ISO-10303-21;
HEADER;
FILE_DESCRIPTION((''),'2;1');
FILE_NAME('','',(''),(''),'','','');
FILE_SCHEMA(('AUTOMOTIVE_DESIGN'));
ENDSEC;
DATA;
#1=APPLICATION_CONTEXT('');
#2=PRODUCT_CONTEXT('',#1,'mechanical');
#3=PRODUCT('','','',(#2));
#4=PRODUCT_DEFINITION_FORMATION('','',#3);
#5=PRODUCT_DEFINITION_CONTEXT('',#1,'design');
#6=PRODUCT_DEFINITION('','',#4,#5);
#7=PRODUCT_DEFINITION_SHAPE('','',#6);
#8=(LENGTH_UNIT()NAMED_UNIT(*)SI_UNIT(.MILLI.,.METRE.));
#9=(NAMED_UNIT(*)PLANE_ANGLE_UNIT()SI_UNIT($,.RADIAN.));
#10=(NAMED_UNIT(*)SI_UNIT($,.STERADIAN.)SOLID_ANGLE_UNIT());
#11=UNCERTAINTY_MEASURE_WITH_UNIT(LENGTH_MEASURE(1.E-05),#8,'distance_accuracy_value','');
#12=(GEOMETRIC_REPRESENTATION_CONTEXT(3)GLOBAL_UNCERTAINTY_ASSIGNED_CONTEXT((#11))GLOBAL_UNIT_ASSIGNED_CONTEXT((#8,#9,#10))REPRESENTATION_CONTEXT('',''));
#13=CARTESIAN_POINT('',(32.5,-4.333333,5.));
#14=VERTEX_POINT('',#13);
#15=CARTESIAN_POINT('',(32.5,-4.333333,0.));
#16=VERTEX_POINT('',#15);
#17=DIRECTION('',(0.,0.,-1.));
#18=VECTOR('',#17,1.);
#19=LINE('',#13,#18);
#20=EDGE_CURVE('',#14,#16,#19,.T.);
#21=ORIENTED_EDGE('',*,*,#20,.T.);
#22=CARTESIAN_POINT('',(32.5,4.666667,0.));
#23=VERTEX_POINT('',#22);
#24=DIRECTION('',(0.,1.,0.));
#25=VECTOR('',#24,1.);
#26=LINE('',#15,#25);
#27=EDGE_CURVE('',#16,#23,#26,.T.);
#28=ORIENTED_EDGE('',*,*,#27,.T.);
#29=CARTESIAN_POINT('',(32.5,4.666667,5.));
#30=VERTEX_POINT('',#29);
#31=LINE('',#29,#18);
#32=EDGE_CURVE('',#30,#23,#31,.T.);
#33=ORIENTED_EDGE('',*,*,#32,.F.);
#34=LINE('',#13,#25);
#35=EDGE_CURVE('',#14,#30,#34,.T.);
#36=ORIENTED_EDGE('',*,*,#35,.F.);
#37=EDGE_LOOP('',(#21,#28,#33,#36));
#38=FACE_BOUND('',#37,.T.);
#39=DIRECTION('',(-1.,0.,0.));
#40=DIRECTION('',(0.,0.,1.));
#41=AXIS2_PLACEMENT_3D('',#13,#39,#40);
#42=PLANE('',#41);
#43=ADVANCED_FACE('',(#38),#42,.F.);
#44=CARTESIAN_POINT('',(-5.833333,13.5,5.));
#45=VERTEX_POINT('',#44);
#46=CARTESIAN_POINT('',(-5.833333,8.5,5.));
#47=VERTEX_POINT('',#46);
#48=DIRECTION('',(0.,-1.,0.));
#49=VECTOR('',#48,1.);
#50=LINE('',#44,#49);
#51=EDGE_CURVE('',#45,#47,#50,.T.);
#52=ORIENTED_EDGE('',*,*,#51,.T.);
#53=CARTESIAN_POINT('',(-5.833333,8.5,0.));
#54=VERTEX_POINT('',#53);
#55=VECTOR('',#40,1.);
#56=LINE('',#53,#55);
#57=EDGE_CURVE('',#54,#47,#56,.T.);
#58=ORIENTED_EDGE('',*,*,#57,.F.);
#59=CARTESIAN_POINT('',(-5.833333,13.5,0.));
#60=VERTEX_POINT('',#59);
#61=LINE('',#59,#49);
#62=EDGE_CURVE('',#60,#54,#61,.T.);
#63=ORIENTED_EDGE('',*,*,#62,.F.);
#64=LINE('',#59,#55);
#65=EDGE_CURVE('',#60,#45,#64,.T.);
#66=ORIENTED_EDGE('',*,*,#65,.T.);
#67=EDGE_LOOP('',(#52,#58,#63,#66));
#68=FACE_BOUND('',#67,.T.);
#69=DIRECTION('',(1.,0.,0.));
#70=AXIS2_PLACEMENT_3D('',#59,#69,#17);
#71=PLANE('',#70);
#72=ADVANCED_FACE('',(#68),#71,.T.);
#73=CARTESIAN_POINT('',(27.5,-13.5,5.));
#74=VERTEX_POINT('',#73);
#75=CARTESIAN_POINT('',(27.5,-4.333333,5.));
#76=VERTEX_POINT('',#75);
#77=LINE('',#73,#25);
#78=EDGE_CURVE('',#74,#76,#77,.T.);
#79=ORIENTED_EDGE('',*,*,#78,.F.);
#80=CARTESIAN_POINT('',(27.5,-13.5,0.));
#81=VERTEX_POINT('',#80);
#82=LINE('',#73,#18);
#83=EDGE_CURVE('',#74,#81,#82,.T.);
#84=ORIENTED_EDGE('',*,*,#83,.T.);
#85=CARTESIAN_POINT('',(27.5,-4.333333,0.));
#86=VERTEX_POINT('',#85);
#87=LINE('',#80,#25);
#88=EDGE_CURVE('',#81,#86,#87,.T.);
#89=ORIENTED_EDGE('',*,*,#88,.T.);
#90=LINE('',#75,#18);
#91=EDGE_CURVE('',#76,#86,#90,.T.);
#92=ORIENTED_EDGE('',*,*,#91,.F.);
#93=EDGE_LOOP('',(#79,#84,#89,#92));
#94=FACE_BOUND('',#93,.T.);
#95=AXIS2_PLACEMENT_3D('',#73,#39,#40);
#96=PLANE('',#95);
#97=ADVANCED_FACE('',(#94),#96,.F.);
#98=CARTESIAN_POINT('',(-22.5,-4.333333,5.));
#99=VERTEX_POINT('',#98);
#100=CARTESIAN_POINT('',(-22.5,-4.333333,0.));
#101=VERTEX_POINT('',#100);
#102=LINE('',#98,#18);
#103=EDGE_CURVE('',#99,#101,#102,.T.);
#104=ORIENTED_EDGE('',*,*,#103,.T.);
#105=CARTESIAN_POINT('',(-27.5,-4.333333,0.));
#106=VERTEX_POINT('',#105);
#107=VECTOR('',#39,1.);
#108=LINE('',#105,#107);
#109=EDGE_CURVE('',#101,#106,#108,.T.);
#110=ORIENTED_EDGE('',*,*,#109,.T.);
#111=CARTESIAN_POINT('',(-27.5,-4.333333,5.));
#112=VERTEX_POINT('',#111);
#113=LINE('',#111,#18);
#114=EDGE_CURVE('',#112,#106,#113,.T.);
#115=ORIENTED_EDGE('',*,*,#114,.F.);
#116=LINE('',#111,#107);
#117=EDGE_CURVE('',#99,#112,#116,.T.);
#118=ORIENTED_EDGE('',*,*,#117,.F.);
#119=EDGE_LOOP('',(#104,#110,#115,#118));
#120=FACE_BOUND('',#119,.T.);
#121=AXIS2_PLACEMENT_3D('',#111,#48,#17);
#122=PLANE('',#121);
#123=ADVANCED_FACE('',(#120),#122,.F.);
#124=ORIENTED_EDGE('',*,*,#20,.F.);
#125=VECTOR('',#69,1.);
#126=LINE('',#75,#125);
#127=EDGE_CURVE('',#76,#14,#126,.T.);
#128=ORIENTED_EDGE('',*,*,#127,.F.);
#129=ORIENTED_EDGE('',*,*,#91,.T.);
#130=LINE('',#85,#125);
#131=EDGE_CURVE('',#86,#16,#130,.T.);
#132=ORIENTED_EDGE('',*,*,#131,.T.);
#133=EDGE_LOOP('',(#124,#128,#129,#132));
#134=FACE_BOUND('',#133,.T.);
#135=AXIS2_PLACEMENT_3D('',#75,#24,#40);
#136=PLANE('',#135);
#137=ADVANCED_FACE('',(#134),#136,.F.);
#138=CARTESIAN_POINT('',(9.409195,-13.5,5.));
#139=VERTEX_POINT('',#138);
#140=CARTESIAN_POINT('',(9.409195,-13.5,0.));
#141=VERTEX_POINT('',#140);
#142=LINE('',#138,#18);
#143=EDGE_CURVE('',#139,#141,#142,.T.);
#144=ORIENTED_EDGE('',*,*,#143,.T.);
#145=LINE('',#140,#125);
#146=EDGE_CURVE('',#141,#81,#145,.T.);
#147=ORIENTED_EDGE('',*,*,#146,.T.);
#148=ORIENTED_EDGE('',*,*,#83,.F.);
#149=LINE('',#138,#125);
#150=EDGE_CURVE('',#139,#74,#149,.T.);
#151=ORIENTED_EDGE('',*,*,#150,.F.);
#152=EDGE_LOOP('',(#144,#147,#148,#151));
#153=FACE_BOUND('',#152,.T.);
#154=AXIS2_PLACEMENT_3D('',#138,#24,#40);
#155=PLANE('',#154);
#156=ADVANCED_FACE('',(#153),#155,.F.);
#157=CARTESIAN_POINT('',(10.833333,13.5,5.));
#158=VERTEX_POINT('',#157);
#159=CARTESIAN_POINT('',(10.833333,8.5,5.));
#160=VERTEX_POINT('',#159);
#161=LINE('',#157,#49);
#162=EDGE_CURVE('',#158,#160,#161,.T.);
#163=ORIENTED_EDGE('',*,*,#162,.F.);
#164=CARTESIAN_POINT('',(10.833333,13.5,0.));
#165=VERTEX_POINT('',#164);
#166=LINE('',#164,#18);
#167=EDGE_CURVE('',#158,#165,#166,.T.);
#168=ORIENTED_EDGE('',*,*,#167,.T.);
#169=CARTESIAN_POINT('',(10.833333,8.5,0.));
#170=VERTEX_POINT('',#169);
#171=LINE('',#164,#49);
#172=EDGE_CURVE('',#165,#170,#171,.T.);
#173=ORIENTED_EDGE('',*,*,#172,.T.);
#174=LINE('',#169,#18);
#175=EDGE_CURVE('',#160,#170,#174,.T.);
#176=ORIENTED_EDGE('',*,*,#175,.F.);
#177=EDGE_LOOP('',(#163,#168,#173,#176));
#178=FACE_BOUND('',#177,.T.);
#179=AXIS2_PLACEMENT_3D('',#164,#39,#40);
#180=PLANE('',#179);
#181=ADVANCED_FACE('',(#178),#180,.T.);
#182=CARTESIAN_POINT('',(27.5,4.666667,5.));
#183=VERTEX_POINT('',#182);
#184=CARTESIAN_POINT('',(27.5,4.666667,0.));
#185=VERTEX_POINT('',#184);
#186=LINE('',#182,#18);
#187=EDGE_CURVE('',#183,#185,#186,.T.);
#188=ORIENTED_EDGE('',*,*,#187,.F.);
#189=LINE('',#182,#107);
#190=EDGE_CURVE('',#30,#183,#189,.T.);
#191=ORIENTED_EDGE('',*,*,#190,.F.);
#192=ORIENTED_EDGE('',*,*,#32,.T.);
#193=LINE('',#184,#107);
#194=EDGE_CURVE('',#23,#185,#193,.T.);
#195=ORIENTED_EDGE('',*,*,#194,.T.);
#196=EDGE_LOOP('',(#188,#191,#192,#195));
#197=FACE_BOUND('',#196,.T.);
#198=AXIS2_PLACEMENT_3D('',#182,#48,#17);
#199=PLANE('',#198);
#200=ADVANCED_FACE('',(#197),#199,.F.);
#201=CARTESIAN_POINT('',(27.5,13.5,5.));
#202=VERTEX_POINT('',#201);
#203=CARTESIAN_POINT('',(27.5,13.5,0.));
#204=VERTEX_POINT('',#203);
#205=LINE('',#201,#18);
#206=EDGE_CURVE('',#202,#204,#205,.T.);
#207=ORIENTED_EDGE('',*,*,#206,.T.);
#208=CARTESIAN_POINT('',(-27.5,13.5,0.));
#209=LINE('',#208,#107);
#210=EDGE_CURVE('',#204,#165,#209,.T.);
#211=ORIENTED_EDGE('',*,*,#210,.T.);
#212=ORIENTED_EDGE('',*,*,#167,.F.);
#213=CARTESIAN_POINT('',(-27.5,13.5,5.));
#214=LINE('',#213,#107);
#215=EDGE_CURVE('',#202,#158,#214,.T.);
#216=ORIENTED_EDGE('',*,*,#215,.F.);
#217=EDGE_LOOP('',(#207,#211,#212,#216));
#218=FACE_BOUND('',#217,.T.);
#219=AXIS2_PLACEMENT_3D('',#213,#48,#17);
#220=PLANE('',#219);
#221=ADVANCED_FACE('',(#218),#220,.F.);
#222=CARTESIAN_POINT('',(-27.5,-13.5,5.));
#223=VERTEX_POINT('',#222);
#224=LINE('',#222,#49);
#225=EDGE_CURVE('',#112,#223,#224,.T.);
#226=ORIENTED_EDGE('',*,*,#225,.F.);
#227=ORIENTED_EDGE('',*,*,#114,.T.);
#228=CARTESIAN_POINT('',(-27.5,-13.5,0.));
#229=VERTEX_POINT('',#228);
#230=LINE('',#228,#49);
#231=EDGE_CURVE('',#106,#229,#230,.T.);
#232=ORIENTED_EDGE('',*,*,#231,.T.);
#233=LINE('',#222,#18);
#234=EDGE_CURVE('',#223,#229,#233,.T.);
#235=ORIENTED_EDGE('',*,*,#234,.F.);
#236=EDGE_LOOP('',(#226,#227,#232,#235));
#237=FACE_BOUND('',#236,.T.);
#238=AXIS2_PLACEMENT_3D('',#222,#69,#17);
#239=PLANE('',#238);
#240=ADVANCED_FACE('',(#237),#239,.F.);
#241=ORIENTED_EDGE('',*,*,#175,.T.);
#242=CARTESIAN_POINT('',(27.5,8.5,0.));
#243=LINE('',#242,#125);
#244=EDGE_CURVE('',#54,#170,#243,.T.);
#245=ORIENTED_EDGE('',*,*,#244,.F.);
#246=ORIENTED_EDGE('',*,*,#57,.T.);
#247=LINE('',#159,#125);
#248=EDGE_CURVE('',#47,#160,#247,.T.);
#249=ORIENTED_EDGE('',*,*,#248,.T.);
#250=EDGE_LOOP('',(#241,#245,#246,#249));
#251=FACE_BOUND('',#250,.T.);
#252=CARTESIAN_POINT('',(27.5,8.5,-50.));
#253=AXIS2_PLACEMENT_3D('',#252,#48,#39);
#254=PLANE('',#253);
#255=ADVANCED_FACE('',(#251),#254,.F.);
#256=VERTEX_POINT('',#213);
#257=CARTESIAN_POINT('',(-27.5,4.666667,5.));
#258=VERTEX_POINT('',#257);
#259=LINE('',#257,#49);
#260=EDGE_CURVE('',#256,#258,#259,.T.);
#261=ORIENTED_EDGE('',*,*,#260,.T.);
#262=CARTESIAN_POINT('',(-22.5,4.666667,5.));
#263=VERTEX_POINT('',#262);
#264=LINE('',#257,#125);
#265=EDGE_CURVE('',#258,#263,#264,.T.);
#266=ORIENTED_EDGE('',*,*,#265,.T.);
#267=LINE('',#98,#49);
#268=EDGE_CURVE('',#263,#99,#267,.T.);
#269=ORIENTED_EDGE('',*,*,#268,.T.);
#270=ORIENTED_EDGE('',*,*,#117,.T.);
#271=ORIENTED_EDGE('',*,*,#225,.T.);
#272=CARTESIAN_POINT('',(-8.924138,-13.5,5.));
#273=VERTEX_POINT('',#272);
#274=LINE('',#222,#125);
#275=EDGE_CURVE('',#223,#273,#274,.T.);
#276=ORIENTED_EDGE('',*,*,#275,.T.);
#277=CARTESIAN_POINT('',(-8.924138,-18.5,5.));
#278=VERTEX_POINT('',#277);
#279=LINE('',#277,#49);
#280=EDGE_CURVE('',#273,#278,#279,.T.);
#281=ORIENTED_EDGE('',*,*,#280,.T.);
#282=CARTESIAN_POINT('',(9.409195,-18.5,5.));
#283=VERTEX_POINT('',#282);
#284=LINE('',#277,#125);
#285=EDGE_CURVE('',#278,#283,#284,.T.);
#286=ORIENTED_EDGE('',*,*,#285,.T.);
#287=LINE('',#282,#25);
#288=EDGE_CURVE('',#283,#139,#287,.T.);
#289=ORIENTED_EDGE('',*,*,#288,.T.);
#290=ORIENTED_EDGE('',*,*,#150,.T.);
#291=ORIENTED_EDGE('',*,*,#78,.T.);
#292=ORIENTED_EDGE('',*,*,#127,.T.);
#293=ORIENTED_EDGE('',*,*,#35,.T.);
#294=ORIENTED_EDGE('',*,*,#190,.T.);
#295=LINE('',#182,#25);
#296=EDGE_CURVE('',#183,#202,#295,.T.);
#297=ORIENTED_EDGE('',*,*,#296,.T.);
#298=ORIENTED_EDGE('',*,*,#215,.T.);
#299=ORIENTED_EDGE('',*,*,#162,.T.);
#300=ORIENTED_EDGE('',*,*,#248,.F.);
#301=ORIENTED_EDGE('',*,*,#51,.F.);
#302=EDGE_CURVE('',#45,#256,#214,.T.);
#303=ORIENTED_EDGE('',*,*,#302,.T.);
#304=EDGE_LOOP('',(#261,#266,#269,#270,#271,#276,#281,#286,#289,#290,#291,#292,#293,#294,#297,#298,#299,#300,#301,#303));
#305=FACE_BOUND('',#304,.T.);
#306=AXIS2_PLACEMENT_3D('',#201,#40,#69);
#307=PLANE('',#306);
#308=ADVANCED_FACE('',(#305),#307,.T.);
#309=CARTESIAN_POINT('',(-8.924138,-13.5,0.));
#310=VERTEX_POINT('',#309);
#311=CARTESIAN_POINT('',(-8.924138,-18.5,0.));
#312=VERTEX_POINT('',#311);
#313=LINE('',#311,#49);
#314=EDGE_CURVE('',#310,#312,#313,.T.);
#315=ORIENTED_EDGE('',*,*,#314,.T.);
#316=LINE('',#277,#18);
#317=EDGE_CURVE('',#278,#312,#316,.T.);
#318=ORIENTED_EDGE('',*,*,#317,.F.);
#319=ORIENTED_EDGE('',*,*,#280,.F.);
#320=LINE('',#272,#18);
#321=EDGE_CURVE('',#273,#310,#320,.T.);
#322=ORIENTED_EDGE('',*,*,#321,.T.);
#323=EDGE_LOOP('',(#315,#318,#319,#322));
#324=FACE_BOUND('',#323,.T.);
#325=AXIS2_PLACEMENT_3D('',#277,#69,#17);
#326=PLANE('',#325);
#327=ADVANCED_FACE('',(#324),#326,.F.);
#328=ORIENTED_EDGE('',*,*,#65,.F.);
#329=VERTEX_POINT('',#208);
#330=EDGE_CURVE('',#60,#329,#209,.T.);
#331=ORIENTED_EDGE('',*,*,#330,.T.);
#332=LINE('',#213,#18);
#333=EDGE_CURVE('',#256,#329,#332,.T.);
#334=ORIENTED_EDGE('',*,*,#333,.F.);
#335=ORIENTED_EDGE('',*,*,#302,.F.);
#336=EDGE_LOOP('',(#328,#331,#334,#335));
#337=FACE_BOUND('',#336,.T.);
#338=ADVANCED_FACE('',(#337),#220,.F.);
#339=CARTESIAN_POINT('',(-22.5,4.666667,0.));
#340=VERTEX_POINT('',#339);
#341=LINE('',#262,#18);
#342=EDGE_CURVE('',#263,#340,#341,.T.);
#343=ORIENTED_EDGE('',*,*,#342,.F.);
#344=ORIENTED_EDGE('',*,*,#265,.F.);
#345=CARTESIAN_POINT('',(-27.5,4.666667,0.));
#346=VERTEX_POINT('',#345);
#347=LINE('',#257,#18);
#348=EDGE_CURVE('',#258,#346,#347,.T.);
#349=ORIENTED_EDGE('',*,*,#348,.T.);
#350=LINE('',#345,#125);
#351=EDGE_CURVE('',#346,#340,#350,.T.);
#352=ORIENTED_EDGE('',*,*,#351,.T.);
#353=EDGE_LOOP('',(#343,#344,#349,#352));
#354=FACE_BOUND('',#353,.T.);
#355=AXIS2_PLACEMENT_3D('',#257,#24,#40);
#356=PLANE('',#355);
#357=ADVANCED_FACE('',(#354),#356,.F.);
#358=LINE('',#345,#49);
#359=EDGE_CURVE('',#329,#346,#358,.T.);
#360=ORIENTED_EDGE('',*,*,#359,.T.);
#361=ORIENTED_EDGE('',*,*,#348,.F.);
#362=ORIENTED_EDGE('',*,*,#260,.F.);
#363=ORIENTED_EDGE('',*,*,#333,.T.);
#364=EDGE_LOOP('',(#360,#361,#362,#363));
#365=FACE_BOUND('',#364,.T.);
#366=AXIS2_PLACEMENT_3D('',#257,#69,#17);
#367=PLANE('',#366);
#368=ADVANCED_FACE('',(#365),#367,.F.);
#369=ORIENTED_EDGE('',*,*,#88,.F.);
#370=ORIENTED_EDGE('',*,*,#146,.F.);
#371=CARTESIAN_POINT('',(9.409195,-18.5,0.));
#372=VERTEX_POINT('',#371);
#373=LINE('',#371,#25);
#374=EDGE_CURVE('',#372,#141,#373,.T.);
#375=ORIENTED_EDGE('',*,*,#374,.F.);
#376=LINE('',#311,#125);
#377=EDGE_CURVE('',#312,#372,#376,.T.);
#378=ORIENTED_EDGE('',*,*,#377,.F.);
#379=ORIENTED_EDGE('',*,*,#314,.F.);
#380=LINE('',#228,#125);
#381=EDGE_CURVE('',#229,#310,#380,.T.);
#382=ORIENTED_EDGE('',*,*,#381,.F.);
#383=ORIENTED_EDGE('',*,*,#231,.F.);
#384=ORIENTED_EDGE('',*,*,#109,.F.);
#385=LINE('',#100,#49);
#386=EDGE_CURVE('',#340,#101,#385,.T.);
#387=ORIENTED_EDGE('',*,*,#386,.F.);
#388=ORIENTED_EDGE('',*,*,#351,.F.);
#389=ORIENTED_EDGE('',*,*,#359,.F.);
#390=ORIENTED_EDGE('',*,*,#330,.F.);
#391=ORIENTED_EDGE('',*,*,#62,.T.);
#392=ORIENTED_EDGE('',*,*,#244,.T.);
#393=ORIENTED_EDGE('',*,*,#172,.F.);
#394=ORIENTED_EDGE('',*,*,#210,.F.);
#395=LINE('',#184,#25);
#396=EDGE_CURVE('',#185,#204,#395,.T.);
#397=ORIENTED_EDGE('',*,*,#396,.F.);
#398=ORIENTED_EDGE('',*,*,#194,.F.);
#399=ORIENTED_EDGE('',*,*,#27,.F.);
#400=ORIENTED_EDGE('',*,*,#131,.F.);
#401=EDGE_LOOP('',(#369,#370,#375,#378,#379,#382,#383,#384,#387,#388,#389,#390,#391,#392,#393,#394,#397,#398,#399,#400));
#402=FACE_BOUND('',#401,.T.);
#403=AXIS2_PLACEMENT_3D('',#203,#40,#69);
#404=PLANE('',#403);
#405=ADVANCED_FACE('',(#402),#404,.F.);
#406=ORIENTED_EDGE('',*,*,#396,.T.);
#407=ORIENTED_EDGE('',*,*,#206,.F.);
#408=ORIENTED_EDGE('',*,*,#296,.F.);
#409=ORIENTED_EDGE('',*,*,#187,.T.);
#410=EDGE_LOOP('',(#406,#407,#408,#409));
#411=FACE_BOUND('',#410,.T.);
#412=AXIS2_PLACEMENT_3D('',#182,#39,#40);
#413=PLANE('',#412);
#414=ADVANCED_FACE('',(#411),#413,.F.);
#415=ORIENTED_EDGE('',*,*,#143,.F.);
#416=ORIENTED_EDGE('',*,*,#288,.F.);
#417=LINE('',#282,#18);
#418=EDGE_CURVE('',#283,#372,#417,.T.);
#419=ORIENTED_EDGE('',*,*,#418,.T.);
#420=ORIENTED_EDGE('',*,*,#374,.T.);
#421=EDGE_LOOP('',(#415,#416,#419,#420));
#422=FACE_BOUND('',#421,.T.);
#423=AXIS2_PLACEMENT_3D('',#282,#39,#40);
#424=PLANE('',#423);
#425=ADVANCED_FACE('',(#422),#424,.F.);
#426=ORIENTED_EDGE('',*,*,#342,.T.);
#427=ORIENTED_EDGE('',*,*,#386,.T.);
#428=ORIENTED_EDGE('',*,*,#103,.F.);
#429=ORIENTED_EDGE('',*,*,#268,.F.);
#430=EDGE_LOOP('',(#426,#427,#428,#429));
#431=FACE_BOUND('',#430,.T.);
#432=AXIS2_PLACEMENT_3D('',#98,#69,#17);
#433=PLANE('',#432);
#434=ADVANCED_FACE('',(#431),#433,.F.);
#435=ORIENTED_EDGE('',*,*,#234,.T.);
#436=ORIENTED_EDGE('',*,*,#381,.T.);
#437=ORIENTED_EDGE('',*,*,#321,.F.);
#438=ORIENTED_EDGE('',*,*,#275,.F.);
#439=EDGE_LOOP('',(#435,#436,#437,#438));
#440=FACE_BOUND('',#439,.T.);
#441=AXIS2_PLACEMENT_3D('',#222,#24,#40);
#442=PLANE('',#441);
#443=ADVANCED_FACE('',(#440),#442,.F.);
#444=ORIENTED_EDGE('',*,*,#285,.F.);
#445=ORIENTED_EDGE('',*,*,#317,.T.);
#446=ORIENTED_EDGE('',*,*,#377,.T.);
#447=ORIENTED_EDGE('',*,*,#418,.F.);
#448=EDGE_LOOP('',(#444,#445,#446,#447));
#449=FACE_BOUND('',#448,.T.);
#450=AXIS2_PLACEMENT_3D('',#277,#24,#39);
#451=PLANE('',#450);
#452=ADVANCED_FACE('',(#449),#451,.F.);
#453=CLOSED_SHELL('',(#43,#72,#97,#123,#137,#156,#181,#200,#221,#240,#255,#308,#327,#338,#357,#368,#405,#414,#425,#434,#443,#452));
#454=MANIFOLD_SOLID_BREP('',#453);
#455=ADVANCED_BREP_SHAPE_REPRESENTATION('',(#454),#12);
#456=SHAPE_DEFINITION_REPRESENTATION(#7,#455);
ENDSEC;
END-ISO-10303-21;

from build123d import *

# Parameters (mm, degrees)
BOSS_EXTRUDE1_DEPTH = 5
CAVITY1_START       = 8.5
CAVITY1_OUTLINE_W   = 16.666666666
CAVITY1_OUTLINE_H   = 5
CAVITY1_DEPTH       = 5


# Read off the part's stored shape, not the designer's step: Cavity1
with BuildPart() as part:
    # Sketch1 → Boss-Extrude1 (new body)
    with BuildSketch(Plane.XY):
        Polygon((27.5, 4.666666667), (27.5, 13.5), (-27.5, 13.5), (-27.5, 4.666666667), (-22.5, 4.666666667), (-22.5, -4.333333333), (-27.5, -4.333333333), (-27.5, -13.5), (-8.924137908, -13.5), (-8.924137908, -18.5), (9.409195426, -18.5), (9.409195426, -13.5), (27.5, -13.5), (27.5, -4.333333333), (32.5, -4.333333333), (32.5, 4.666666667), align=None)
    extrude(amount=BOSS_EXTRUDE1_DEPTH)

    # Cavity1 outline → Cavity1 (cut)
    with BuildSketch(Plane(origin=(0, 0, 0), x_dir=(1, 0, 0), z_dir=(0, 1, 0)).offset(CAVITY1_START)):
        with Locations((2.5, -2.5)):
            Rectangle(CAVITY1_OUTLINE_W, CAVITY1_OUTLINE_H)
    extrude(amount=CAVITY1_DEPTH, mode=Mode.SUBTRACT)


solid = part.part
